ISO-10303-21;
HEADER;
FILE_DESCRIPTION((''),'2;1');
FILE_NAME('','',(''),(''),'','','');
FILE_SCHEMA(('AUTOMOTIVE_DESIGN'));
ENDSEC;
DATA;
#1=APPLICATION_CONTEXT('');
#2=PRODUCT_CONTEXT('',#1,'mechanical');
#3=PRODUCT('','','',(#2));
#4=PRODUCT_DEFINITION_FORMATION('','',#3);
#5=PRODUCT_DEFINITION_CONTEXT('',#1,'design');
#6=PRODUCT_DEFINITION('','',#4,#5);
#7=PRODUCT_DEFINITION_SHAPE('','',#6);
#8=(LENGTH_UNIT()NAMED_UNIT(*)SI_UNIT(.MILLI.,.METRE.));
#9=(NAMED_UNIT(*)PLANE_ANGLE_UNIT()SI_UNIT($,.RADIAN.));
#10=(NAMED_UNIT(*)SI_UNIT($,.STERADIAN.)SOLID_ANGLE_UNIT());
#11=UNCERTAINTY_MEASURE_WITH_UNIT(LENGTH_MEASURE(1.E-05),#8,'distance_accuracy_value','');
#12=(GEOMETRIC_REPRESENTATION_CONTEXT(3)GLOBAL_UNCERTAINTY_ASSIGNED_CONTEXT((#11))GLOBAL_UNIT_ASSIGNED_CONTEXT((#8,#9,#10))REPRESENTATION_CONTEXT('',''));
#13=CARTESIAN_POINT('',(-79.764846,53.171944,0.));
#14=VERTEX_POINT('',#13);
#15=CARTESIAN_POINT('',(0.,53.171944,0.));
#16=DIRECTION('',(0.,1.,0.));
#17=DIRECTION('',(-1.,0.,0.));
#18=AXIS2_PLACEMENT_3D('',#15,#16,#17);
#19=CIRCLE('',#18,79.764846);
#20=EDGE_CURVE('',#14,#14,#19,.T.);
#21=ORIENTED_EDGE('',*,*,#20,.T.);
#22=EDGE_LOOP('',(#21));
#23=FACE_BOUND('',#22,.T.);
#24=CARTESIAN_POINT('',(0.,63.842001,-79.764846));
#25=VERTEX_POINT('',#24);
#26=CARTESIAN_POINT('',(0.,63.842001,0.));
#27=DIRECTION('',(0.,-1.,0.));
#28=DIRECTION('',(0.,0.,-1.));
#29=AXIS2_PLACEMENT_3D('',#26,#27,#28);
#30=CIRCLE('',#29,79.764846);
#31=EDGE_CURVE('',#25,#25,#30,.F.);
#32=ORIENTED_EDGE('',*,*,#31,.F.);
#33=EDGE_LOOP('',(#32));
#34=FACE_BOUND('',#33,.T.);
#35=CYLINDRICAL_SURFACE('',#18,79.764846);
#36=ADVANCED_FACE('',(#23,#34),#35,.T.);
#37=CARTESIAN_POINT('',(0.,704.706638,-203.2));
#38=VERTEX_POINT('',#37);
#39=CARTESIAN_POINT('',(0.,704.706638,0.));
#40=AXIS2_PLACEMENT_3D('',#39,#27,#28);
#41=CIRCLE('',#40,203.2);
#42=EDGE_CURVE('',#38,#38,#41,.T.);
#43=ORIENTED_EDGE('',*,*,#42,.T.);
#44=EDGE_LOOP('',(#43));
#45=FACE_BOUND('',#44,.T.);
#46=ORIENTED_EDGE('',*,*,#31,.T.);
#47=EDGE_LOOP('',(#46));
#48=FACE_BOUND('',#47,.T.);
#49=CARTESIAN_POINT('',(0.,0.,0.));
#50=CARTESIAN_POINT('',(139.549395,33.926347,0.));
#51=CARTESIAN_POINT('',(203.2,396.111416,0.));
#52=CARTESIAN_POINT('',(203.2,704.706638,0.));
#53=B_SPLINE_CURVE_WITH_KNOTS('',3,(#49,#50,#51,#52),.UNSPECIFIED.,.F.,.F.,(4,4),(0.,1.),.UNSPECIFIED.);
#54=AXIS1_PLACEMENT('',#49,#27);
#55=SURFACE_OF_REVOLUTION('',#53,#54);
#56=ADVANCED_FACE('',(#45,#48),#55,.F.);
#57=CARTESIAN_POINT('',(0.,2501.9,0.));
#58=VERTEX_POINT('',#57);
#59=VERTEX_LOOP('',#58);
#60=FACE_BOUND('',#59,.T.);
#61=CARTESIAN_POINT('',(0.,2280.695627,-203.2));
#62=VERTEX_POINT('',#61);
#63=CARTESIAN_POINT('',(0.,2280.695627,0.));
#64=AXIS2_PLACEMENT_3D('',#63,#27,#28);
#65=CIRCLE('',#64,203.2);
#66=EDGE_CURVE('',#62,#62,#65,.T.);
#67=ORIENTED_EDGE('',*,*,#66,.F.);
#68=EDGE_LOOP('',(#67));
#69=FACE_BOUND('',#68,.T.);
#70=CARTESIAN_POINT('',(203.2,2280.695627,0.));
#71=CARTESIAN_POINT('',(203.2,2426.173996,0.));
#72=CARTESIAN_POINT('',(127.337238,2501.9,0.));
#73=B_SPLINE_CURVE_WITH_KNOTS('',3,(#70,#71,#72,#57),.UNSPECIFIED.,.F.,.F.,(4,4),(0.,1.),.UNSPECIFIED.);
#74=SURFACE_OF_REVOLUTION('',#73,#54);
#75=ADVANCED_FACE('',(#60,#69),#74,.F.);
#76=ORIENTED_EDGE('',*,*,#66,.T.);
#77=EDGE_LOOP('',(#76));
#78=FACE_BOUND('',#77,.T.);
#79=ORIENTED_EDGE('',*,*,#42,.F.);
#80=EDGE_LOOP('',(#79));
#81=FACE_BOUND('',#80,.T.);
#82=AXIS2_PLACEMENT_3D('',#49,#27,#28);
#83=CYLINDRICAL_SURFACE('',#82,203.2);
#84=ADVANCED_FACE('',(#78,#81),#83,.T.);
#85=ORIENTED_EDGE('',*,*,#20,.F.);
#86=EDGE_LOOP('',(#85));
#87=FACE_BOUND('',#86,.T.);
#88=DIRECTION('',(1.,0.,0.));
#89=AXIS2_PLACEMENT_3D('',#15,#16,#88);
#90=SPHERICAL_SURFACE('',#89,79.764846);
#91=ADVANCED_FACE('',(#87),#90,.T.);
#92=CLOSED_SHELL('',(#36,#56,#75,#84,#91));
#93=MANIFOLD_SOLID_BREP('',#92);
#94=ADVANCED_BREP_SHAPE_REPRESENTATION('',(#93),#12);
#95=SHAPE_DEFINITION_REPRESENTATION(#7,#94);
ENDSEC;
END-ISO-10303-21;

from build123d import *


# Read off the part's stored shape, not the designer's step: Revolve1
with BuildPart() as part:
    # Revolve1 outline → Revolve1 (revolve)
    with BuildSketch(Plane.XY):
        with BuildLine():
            add(Edge.make_bspline(
                [(0, 0), (139.549394705, 33.92634695), (203.2, 396.111416325), (203.2, 704.706637656)],
                knots=[0, 0, 0, 0, 1, 1, 1, 1], degree=3))
            Line((203.2, 704.706637656), (203.2, 2280.695627176))
            add(Edge.make_bspline(
                [(203.2, 2280.695627176), (203.2, 2426.173995889), (127.337237948, 2501.9), (0, 2501.9)],
                knots=[0, 0, 0, 0, 1, 1, 1, 1], degree=3))
            Line((0, 2501.9), (0, 0))
        make_face()
    revolve(axis=Axis((0, 0, 0), (0, 1, 0)))

    # Sketch2 → Revolve2 (revolve)
    with BuildSketch(Plane.XY, mode=Mode.PRIVATE) as revolve2_sk:
        with BuildLine():
            Line((79.764845599, 53.171943602), (79.764845599, 129.186428708))
            Line((79.764845599, 129.186428708), (0, 129.186428708))
            Line((0, 129.186428708), (0, -26.592901997))
            ThreePointArc((0, -26.592901997), (56.402263223, -3.230319621), (79.764845599, 53.171943602))
        make_face()
    revolve(revolve2_sk.sketch.rotate(Axis((0, 53.171943602, 0), (0, -1, 0)), 270), axis=Axis((0, 53.171943602, 0), (0, -1, 0)))


solid = part.part
